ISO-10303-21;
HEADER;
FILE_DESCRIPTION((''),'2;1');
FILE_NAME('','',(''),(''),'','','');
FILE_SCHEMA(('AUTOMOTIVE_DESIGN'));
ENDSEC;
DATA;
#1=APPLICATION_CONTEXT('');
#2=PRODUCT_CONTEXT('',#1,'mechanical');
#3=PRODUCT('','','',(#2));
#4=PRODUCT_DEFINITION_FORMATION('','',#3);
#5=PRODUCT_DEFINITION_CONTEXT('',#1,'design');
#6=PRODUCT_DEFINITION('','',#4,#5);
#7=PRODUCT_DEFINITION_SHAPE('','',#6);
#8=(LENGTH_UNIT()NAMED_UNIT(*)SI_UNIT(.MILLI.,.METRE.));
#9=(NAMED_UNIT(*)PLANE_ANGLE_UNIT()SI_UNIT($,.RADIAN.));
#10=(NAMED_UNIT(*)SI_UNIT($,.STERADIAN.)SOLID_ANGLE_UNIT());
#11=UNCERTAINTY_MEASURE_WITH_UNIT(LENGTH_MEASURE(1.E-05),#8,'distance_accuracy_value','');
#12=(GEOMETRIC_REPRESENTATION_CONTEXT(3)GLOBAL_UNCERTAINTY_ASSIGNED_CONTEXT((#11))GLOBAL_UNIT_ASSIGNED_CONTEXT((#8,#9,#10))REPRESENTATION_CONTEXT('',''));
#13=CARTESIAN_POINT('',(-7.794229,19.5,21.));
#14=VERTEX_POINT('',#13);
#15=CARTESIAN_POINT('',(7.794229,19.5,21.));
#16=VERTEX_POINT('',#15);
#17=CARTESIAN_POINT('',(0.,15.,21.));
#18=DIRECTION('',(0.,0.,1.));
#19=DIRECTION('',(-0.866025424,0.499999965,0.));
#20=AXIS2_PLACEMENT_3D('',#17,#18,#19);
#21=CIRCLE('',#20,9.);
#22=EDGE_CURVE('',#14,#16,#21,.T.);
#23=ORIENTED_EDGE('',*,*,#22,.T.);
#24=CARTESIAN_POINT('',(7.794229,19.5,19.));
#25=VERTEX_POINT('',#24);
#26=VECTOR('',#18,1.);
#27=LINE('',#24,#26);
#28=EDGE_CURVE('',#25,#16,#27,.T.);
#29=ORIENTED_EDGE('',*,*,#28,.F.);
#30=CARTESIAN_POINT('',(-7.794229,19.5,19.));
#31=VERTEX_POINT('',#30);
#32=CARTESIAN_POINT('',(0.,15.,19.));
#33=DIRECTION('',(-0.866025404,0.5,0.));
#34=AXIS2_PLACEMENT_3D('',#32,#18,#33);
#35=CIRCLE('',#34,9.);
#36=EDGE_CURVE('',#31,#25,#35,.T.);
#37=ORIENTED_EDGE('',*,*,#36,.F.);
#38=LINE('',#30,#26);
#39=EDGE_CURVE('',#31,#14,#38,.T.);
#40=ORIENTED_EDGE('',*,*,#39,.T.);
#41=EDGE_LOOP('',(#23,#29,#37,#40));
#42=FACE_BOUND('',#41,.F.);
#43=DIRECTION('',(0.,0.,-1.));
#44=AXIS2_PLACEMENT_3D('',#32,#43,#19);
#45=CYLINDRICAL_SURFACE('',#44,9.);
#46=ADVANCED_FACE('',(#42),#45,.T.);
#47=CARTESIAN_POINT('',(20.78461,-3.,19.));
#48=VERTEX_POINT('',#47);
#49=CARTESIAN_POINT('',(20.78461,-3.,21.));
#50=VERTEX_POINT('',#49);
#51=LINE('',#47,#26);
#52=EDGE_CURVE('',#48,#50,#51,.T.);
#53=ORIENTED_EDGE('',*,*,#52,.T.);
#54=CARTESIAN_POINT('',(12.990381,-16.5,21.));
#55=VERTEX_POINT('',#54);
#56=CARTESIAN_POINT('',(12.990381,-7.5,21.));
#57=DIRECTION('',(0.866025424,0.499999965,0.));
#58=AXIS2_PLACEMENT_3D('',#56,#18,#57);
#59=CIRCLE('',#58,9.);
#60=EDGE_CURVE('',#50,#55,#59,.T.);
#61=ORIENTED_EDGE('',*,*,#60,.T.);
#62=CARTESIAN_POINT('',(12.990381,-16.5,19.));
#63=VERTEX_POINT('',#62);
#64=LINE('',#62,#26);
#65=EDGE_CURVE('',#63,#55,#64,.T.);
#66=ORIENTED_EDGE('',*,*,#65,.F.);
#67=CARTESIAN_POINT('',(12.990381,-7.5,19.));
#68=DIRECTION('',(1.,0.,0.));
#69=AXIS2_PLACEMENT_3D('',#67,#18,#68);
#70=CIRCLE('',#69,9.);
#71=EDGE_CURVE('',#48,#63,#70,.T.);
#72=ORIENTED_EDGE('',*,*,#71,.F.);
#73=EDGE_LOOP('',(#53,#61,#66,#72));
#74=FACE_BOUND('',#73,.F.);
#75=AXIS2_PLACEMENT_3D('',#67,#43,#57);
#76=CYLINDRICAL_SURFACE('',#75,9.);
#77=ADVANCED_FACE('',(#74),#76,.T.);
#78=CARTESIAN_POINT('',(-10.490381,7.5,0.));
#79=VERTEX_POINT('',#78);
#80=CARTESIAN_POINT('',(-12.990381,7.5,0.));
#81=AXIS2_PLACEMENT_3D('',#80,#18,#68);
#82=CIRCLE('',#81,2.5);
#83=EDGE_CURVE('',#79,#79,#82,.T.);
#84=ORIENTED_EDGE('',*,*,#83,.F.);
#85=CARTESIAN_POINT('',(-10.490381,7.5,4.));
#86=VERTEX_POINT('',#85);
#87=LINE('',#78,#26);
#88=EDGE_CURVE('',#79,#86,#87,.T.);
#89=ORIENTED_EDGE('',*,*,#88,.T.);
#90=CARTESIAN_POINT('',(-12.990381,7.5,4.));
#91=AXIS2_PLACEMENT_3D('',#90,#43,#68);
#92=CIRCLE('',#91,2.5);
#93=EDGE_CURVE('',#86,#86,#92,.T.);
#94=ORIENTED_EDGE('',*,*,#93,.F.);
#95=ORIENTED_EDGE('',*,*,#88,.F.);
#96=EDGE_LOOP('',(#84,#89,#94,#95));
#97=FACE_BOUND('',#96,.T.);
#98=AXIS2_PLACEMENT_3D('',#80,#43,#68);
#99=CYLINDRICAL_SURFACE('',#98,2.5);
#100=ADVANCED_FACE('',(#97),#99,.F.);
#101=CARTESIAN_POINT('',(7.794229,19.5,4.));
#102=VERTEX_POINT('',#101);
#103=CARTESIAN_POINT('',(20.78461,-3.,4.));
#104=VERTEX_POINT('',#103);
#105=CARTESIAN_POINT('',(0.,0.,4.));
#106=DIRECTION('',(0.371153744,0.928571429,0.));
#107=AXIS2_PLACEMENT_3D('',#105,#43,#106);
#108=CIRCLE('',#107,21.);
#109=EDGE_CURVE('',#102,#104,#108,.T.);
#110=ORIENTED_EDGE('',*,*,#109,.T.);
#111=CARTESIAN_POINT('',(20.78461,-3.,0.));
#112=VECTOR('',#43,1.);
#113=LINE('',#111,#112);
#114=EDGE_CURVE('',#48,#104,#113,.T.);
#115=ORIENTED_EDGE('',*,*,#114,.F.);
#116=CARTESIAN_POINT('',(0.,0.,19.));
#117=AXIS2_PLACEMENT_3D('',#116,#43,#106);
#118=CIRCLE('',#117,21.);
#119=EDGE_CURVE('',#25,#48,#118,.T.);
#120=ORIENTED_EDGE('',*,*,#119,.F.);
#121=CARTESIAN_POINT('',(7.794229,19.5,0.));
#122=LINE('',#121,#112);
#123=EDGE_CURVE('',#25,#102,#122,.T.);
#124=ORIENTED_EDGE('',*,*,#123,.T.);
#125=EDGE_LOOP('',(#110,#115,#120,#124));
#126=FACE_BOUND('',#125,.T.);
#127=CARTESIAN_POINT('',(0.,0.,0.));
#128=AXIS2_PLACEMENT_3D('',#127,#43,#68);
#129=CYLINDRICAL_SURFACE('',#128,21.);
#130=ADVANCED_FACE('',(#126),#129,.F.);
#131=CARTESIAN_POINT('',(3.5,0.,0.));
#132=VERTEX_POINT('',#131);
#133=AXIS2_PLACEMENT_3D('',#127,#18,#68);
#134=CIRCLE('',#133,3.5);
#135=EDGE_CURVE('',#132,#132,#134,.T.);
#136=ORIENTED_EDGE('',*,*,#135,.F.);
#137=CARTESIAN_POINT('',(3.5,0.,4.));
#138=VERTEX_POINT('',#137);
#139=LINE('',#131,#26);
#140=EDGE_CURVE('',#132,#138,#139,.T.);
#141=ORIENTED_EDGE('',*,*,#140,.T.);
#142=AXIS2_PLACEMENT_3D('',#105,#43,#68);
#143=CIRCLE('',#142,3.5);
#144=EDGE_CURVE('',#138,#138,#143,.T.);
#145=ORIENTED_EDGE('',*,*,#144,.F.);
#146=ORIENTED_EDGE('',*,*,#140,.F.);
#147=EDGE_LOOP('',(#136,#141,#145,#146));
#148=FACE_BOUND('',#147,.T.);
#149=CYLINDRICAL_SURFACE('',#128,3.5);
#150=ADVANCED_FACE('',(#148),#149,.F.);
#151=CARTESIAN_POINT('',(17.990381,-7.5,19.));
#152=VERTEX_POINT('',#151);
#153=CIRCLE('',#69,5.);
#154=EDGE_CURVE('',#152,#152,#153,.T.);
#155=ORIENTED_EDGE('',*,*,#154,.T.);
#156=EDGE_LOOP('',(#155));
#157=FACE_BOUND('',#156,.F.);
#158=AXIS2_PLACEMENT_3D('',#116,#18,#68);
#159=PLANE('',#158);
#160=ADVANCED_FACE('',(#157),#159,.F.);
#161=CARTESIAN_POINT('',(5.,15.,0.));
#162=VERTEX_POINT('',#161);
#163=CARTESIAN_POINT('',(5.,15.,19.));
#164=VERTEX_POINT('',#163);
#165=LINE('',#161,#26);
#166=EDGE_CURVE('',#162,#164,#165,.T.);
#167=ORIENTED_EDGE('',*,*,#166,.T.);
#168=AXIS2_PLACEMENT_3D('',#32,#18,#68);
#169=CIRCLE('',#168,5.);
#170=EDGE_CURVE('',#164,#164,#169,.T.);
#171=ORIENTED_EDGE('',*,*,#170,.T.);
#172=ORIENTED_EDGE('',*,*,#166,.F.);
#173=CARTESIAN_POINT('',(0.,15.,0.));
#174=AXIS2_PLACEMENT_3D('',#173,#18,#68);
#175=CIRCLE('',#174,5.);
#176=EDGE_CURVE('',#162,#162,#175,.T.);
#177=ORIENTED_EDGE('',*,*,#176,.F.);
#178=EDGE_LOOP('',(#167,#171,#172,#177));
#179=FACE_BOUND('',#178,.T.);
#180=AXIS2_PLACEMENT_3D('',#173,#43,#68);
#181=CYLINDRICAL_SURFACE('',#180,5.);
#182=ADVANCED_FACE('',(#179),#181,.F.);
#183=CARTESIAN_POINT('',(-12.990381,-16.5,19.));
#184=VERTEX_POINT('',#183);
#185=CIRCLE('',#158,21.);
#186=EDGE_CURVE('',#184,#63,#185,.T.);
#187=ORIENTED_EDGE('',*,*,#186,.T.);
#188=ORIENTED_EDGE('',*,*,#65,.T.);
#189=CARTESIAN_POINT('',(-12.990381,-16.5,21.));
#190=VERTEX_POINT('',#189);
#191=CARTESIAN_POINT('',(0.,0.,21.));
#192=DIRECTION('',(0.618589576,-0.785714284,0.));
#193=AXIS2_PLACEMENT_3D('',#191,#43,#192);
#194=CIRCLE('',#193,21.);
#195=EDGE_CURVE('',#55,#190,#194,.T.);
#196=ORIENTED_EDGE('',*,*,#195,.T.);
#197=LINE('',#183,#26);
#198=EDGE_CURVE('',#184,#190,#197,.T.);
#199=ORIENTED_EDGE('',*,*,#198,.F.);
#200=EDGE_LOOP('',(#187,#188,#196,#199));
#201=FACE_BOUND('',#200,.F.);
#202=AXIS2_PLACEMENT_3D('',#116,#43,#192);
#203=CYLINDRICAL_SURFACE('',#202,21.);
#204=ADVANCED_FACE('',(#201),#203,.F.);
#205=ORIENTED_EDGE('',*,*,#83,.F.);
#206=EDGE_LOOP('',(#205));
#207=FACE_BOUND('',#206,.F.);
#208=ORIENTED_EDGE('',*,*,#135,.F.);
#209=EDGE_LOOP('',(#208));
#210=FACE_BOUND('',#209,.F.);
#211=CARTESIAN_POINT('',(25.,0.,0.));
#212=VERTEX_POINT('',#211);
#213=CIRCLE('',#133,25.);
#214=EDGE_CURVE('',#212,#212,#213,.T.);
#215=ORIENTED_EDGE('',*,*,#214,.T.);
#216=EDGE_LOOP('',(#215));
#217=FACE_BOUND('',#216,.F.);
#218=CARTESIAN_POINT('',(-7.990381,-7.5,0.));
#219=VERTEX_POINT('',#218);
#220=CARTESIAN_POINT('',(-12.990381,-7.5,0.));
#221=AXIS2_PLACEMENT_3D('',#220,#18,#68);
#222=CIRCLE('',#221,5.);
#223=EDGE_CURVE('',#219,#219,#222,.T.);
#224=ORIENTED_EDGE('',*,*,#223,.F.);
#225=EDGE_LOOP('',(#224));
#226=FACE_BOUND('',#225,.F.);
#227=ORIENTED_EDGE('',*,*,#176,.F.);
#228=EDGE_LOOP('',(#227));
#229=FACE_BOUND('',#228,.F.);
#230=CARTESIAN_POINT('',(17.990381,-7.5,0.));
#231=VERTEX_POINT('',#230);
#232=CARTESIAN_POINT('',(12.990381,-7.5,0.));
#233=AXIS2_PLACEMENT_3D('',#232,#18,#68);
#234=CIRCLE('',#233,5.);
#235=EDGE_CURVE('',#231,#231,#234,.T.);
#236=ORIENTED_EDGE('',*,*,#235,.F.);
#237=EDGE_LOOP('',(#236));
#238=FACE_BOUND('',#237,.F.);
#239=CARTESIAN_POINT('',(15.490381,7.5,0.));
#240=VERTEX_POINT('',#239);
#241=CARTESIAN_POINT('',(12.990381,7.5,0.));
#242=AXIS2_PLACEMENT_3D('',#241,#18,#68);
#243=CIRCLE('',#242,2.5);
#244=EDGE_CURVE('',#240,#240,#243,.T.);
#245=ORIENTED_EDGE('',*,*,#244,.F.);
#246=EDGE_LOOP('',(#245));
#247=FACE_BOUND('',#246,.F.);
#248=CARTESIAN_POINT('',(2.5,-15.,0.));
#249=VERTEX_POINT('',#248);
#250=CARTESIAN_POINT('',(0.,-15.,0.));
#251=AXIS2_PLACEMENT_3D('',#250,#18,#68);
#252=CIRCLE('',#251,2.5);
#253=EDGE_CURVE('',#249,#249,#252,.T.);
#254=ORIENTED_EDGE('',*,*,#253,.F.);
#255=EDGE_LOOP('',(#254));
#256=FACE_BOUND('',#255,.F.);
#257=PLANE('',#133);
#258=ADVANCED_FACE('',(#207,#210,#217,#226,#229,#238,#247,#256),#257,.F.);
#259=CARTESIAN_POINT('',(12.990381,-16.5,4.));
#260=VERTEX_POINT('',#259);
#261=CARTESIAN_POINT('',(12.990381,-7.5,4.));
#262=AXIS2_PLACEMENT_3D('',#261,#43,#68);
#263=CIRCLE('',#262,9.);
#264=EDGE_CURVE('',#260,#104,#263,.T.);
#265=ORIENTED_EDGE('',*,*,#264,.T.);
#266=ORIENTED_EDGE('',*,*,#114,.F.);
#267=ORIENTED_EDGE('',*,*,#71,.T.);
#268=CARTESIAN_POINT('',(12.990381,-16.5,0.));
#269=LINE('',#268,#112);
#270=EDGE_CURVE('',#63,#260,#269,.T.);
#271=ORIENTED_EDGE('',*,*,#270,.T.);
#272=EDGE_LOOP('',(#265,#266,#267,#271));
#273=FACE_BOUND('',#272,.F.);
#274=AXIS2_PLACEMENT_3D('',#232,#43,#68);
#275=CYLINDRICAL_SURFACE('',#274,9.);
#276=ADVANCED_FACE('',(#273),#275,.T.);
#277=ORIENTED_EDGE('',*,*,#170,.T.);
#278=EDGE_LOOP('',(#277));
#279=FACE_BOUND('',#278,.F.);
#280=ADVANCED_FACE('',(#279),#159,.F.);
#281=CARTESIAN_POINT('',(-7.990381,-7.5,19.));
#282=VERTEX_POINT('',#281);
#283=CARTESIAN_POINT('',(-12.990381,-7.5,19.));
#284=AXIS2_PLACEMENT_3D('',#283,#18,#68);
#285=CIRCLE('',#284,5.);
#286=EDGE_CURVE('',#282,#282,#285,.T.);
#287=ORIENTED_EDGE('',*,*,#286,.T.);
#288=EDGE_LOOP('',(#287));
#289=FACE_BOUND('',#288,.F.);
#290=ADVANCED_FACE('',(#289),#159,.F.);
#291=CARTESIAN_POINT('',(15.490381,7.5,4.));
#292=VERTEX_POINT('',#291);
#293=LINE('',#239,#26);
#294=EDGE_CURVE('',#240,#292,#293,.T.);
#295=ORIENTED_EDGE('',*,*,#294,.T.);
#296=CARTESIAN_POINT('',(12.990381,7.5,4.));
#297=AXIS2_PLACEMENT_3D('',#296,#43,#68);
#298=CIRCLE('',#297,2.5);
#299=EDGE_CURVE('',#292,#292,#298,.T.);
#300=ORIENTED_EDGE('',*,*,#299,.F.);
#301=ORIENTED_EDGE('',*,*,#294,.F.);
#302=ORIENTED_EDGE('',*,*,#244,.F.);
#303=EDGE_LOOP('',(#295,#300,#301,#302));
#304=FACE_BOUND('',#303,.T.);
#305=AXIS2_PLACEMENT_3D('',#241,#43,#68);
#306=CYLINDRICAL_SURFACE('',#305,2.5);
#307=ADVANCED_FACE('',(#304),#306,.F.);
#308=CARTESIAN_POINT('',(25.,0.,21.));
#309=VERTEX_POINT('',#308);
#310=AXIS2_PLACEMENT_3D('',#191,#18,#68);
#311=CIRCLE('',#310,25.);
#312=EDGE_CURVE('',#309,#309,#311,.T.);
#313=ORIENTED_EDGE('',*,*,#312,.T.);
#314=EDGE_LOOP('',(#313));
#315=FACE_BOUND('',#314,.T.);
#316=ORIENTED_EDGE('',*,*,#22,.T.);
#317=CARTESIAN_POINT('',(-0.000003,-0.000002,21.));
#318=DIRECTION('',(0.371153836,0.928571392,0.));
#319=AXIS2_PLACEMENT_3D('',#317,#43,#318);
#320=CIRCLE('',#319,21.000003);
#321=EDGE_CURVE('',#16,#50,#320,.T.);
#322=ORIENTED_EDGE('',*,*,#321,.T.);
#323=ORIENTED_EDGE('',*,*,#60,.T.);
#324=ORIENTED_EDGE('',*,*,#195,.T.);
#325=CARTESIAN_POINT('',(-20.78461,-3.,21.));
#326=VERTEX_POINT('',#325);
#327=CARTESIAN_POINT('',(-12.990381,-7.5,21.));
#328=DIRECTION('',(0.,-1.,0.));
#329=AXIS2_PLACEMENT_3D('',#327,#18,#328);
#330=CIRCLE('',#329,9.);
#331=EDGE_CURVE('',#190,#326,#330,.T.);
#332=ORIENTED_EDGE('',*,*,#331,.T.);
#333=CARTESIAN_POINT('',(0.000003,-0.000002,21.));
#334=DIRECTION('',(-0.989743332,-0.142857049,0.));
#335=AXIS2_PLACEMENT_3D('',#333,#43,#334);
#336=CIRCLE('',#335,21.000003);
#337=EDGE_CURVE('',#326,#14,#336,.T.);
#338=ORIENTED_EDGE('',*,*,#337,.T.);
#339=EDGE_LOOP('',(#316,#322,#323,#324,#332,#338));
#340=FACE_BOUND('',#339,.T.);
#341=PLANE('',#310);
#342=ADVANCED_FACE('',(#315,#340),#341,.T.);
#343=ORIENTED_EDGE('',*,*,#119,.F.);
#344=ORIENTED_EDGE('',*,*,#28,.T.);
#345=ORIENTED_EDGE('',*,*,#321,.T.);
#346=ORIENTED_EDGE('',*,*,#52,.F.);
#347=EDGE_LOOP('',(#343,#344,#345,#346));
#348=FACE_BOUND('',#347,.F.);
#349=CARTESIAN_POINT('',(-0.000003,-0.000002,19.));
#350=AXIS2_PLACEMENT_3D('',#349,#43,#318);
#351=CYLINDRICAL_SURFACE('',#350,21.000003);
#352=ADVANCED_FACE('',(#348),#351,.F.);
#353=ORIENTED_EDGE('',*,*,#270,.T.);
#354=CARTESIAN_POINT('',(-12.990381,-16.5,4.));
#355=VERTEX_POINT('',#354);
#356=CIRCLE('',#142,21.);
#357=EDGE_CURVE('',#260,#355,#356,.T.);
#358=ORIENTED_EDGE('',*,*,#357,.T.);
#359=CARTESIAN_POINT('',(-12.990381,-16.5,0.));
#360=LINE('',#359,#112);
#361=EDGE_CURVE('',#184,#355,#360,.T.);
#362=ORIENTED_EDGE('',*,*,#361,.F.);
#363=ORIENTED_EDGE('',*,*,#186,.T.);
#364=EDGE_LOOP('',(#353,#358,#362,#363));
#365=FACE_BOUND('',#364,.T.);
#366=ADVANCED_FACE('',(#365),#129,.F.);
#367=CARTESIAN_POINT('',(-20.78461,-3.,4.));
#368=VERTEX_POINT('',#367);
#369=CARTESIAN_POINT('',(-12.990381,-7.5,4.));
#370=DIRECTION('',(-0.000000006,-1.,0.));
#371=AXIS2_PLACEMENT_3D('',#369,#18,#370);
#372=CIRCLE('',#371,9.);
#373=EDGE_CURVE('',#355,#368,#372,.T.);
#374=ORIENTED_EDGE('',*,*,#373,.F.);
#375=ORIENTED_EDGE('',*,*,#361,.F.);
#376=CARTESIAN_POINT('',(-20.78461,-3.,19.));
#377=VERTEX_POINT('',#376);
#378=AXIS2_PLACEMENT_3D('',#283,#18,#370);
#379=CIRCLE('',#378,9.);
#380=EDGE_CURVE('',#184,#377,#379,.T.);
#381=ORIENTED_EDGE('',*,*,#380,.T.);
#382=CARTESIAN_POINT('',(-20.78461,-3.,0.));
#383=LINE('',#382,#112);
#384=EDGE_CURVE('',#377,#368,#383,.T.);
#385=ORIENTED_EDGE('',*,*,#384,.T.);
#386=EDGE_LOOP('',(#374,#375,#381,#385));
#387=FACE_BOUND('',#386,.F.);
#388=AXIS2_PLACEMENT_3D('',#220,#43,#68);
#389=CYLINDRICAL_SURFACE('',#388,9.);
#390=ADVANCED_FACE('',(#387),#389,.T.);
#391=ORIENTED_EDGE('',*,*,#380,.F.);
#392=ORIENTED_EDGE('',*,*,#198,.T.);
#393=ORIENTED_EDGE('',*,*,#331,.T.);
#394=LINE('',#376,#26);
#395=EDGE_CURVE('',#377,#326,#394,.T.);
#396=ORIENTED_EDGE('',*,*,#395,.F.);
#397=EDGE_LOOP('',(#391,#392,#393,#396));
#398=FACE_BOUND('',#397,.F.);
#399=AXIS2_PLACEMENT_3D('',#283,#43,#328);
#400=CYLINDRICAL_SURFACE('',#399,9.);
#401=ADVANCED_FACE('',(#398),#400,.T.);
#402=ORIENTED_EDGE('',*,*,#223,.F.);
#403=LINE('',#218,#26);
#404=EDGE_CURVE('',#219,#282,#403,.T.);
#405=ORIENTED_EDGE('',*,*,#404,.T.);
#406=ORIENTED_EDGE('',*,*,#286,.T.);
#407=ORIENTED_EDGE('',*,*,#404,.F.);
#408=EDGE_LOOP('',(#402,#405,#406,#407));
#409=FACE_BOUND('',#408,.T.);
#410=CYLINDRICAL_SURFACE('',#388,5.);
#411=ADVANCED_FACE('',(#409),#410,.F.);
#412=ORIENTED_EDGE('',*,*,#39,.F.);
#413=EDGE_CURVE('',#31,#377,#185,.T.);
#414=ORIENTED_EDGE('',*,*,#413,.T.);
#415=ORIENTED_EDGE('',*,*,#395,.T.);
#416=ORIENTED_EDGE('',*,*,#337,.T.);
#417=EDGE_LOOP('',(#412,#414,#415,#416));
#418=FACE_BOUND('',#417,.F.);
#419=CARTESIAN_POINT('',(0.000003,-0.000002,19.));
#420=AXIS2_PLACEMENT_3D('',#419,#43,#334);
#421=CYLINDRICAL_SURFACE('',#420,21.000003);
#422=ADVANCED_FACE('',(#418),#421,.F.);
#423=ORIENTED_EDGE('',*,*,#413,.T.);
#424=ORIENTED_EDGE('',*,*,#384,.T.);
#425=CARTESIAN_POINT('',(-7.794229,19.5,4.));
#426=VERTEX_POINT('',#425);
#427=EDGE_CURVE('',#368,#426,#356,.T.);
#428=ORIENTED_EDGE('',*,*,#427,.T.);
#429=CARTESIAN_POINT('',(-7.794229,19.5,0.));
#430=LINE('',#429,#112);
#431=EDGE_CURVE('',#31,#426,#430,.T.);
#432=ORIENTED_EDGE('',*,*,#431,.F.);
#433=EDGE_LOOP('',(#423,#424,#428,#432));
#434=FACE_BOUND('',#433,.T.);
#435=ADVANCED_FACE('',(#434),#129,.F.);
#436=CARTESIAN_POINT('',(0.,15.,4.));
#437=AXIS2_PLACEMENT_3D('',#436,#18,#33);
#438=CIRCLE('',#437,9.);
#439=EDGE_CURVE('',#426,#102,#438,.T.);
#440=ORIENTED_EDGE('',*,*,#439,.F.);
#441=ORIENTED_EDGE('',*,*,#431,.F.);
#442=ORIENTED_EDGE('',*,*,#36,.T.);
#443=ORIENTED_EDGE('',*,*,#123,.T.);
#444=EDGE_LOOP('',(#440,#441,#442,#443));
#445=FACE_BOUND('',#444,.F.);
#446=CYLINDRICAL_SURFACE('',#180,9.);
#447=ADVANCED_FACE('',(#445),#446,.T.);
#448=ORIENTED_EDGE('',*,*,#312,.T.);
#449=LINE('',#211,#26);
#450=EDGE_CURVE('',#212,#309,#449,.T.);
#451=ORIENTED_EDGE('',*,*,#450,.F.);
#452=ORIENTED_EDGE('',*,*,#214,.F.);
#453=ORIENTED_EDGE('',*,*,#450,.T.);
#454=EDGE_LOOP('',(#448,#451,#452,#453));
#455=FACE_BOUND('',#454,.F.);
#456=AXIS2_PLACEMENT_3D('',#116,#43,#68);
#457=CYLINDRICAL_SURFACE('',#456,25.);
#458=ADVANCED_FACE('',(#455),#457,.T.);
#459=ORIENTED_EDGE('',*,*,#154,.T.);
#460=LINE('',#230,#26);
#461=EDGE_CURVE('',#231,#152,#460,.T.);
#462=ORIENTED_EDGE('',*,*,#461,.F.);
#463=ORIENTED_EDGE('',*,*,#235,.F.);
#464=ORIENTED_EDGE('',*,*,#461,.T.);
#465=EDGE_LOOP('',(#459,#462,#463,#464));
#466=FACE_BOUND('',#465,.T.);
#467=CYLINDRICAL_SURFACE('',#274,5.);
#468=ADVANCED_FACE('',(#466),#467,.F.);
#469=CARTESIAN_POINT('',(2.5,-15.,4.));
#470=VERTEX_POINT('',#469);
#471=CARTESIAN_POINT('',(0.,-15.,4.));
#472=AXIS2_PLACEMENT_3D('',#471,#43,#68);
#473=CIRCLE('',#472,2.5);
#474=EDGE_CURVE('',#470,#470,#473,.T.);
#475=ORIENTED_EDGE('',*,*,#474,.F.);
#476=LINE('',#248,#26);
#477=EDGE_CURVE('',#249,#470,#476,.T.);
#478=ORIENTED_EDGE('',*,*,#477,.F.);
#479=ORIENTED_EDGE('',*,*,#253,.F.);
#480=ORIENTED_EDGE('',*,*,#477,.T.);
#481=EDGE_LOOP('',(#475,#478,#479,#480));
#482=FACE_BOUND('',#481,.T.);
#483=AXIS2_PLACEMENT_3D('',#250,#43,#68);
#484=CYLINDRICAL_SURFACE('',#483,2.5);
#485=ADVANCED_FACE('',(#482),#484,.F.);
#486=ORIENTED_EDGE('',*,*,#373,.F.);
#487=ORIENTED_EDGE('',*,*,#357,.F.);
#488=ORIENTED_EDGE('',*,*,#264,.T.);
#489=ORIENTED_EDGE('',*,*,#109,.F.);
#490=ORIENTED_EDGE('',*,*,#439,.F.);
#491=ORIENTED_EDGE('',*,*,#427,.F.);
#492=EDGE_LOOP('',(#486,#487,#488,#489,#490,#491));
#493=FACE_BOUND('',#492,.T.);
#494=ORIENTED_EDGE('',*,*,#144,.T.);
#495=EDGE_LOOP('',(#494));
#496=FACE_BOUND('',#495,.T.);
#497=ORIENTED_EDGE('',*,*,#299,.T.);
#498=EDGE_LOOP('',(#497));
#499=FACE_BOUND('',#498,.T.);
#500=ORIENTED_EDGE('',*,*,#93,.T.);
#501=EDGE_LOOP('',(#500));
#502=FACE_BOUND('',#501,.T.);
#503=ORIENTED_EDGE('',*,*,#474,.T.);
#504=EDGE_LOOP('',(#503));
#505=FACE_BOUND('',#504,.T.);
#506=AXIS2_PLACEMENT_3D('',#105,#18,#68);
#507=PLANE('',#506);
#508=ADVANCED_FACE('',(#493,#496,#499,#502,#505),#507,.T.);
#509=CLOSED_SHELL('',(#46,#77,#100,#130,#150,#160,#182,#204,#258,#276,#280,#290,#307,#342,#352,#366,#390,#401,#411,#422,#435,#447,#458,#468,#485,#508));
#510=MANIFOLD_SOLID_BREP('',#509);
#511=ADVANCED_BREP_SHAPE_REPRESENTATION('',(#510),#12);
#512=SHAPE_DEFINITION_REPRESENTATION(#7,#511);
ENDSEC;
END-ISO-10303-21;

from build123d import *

# Parameters (mm, degrees)
F0_R     = 25
F0_R_2   = 5
F0_R_3   = 2.5
F0_R_4   = 3.5
F1_DEPTH = 19
F2_T     = -4
F3_DEPTH = 25
F4_R     = 25
F5_DEPTH = 2


# Not quite as in the source:
# - a feature names something its author has since deleted; it is built from what else it names


with BuildPart() as f1:
    # F0 (on Top) → F1 (new body)
    with BuildSketch(Plane.XY):
        Circle(F0_R)
        with Locations((-12.990381, -7.5)):
            Circle(F0_R_2, mode=Mode.SUBTRACT)
        with Locations((0, -15)):
            Circle(F0_R_3, mode=Mode.SUBTRACT)
        with Locations((12.990381, -7.5)):
            Circle(F0_R_2, mode=Mode.SUBTRACT)
        with Locations((-12.990381, 7.5)):
            Circle(F0_R_3, mode=Mode.SUBTRACT)
        Circle(F0_R_4, mode=Mode.SUBTRACT)
        with Locations((12.990381, 7.5)):
            Circle(F0_R_3, mode=Mode.SUBTRACT)
        with Locations((0, 15)):
            Circle(F0_R_2, mode=Mode.SUBTRACT)
        Circle(F0_R_4)
        with Locations((-12.990381, 7.5)):
            Circle(F0_R_3)
        with Locations((12.990381, 7.5)):
            Circle(F0_R_3)
        with Locations((0, -15)):
            Circle(F0_R_3)
    extrude(amount=F1_DEPTH)

    # F2
    f2_openings = [f1.faces().sort_by_distance(p)[0] for p in [
        (0, 0, 19),
    ]]
    offset(amount=F2_T, openings=f2_openings)

    # F0 (on Top) → F3 (cut)
    with BuildSketch(Plane.XY):
        with Locations((-12.990381, 7.5)):
            Circle(F0_R_3)
        Circle(F0_R_4)
        with Locations((12.990381, 7.5)):
            Circle(F0_R_3)
        with Locations((0, -15)):
            Circle(F0_R_3)
    extrude(amount=F3_DEPTH, mode=Mode.SUBTRACT)

    # F4 (on face) → F5 (join)
    with BuildSketch(Plane.XY.offset(19)):
        Circle(F4_R)
        with BuildLine():
            ThreePointArc((-20.78461, -3), (-18.186533, 10.5), (-7.794229, 19.5))
            ThreePointArc((-7.794229, 19.5), (0, 6), (7.794229, 19.5))
            ThreePointArc((7.794229, 19.5), (18.186533, 10.5), (20.78461, -3))
            ThreePointArc((20.78461, -3), (5.196152, -3), (12.990381, -16.5))
            ThreePointArc((12.990381, -16.5), (0, -21), (-12.990381, -16.5))
            ThreePointArc((-12.990381, -16.5), (-5.196152, -3), (-20.78461, -3))
        make_face(mode=Mode.SUBTRACT)
    extrude(amount=F5_DEPTH)


solid = f1.part
